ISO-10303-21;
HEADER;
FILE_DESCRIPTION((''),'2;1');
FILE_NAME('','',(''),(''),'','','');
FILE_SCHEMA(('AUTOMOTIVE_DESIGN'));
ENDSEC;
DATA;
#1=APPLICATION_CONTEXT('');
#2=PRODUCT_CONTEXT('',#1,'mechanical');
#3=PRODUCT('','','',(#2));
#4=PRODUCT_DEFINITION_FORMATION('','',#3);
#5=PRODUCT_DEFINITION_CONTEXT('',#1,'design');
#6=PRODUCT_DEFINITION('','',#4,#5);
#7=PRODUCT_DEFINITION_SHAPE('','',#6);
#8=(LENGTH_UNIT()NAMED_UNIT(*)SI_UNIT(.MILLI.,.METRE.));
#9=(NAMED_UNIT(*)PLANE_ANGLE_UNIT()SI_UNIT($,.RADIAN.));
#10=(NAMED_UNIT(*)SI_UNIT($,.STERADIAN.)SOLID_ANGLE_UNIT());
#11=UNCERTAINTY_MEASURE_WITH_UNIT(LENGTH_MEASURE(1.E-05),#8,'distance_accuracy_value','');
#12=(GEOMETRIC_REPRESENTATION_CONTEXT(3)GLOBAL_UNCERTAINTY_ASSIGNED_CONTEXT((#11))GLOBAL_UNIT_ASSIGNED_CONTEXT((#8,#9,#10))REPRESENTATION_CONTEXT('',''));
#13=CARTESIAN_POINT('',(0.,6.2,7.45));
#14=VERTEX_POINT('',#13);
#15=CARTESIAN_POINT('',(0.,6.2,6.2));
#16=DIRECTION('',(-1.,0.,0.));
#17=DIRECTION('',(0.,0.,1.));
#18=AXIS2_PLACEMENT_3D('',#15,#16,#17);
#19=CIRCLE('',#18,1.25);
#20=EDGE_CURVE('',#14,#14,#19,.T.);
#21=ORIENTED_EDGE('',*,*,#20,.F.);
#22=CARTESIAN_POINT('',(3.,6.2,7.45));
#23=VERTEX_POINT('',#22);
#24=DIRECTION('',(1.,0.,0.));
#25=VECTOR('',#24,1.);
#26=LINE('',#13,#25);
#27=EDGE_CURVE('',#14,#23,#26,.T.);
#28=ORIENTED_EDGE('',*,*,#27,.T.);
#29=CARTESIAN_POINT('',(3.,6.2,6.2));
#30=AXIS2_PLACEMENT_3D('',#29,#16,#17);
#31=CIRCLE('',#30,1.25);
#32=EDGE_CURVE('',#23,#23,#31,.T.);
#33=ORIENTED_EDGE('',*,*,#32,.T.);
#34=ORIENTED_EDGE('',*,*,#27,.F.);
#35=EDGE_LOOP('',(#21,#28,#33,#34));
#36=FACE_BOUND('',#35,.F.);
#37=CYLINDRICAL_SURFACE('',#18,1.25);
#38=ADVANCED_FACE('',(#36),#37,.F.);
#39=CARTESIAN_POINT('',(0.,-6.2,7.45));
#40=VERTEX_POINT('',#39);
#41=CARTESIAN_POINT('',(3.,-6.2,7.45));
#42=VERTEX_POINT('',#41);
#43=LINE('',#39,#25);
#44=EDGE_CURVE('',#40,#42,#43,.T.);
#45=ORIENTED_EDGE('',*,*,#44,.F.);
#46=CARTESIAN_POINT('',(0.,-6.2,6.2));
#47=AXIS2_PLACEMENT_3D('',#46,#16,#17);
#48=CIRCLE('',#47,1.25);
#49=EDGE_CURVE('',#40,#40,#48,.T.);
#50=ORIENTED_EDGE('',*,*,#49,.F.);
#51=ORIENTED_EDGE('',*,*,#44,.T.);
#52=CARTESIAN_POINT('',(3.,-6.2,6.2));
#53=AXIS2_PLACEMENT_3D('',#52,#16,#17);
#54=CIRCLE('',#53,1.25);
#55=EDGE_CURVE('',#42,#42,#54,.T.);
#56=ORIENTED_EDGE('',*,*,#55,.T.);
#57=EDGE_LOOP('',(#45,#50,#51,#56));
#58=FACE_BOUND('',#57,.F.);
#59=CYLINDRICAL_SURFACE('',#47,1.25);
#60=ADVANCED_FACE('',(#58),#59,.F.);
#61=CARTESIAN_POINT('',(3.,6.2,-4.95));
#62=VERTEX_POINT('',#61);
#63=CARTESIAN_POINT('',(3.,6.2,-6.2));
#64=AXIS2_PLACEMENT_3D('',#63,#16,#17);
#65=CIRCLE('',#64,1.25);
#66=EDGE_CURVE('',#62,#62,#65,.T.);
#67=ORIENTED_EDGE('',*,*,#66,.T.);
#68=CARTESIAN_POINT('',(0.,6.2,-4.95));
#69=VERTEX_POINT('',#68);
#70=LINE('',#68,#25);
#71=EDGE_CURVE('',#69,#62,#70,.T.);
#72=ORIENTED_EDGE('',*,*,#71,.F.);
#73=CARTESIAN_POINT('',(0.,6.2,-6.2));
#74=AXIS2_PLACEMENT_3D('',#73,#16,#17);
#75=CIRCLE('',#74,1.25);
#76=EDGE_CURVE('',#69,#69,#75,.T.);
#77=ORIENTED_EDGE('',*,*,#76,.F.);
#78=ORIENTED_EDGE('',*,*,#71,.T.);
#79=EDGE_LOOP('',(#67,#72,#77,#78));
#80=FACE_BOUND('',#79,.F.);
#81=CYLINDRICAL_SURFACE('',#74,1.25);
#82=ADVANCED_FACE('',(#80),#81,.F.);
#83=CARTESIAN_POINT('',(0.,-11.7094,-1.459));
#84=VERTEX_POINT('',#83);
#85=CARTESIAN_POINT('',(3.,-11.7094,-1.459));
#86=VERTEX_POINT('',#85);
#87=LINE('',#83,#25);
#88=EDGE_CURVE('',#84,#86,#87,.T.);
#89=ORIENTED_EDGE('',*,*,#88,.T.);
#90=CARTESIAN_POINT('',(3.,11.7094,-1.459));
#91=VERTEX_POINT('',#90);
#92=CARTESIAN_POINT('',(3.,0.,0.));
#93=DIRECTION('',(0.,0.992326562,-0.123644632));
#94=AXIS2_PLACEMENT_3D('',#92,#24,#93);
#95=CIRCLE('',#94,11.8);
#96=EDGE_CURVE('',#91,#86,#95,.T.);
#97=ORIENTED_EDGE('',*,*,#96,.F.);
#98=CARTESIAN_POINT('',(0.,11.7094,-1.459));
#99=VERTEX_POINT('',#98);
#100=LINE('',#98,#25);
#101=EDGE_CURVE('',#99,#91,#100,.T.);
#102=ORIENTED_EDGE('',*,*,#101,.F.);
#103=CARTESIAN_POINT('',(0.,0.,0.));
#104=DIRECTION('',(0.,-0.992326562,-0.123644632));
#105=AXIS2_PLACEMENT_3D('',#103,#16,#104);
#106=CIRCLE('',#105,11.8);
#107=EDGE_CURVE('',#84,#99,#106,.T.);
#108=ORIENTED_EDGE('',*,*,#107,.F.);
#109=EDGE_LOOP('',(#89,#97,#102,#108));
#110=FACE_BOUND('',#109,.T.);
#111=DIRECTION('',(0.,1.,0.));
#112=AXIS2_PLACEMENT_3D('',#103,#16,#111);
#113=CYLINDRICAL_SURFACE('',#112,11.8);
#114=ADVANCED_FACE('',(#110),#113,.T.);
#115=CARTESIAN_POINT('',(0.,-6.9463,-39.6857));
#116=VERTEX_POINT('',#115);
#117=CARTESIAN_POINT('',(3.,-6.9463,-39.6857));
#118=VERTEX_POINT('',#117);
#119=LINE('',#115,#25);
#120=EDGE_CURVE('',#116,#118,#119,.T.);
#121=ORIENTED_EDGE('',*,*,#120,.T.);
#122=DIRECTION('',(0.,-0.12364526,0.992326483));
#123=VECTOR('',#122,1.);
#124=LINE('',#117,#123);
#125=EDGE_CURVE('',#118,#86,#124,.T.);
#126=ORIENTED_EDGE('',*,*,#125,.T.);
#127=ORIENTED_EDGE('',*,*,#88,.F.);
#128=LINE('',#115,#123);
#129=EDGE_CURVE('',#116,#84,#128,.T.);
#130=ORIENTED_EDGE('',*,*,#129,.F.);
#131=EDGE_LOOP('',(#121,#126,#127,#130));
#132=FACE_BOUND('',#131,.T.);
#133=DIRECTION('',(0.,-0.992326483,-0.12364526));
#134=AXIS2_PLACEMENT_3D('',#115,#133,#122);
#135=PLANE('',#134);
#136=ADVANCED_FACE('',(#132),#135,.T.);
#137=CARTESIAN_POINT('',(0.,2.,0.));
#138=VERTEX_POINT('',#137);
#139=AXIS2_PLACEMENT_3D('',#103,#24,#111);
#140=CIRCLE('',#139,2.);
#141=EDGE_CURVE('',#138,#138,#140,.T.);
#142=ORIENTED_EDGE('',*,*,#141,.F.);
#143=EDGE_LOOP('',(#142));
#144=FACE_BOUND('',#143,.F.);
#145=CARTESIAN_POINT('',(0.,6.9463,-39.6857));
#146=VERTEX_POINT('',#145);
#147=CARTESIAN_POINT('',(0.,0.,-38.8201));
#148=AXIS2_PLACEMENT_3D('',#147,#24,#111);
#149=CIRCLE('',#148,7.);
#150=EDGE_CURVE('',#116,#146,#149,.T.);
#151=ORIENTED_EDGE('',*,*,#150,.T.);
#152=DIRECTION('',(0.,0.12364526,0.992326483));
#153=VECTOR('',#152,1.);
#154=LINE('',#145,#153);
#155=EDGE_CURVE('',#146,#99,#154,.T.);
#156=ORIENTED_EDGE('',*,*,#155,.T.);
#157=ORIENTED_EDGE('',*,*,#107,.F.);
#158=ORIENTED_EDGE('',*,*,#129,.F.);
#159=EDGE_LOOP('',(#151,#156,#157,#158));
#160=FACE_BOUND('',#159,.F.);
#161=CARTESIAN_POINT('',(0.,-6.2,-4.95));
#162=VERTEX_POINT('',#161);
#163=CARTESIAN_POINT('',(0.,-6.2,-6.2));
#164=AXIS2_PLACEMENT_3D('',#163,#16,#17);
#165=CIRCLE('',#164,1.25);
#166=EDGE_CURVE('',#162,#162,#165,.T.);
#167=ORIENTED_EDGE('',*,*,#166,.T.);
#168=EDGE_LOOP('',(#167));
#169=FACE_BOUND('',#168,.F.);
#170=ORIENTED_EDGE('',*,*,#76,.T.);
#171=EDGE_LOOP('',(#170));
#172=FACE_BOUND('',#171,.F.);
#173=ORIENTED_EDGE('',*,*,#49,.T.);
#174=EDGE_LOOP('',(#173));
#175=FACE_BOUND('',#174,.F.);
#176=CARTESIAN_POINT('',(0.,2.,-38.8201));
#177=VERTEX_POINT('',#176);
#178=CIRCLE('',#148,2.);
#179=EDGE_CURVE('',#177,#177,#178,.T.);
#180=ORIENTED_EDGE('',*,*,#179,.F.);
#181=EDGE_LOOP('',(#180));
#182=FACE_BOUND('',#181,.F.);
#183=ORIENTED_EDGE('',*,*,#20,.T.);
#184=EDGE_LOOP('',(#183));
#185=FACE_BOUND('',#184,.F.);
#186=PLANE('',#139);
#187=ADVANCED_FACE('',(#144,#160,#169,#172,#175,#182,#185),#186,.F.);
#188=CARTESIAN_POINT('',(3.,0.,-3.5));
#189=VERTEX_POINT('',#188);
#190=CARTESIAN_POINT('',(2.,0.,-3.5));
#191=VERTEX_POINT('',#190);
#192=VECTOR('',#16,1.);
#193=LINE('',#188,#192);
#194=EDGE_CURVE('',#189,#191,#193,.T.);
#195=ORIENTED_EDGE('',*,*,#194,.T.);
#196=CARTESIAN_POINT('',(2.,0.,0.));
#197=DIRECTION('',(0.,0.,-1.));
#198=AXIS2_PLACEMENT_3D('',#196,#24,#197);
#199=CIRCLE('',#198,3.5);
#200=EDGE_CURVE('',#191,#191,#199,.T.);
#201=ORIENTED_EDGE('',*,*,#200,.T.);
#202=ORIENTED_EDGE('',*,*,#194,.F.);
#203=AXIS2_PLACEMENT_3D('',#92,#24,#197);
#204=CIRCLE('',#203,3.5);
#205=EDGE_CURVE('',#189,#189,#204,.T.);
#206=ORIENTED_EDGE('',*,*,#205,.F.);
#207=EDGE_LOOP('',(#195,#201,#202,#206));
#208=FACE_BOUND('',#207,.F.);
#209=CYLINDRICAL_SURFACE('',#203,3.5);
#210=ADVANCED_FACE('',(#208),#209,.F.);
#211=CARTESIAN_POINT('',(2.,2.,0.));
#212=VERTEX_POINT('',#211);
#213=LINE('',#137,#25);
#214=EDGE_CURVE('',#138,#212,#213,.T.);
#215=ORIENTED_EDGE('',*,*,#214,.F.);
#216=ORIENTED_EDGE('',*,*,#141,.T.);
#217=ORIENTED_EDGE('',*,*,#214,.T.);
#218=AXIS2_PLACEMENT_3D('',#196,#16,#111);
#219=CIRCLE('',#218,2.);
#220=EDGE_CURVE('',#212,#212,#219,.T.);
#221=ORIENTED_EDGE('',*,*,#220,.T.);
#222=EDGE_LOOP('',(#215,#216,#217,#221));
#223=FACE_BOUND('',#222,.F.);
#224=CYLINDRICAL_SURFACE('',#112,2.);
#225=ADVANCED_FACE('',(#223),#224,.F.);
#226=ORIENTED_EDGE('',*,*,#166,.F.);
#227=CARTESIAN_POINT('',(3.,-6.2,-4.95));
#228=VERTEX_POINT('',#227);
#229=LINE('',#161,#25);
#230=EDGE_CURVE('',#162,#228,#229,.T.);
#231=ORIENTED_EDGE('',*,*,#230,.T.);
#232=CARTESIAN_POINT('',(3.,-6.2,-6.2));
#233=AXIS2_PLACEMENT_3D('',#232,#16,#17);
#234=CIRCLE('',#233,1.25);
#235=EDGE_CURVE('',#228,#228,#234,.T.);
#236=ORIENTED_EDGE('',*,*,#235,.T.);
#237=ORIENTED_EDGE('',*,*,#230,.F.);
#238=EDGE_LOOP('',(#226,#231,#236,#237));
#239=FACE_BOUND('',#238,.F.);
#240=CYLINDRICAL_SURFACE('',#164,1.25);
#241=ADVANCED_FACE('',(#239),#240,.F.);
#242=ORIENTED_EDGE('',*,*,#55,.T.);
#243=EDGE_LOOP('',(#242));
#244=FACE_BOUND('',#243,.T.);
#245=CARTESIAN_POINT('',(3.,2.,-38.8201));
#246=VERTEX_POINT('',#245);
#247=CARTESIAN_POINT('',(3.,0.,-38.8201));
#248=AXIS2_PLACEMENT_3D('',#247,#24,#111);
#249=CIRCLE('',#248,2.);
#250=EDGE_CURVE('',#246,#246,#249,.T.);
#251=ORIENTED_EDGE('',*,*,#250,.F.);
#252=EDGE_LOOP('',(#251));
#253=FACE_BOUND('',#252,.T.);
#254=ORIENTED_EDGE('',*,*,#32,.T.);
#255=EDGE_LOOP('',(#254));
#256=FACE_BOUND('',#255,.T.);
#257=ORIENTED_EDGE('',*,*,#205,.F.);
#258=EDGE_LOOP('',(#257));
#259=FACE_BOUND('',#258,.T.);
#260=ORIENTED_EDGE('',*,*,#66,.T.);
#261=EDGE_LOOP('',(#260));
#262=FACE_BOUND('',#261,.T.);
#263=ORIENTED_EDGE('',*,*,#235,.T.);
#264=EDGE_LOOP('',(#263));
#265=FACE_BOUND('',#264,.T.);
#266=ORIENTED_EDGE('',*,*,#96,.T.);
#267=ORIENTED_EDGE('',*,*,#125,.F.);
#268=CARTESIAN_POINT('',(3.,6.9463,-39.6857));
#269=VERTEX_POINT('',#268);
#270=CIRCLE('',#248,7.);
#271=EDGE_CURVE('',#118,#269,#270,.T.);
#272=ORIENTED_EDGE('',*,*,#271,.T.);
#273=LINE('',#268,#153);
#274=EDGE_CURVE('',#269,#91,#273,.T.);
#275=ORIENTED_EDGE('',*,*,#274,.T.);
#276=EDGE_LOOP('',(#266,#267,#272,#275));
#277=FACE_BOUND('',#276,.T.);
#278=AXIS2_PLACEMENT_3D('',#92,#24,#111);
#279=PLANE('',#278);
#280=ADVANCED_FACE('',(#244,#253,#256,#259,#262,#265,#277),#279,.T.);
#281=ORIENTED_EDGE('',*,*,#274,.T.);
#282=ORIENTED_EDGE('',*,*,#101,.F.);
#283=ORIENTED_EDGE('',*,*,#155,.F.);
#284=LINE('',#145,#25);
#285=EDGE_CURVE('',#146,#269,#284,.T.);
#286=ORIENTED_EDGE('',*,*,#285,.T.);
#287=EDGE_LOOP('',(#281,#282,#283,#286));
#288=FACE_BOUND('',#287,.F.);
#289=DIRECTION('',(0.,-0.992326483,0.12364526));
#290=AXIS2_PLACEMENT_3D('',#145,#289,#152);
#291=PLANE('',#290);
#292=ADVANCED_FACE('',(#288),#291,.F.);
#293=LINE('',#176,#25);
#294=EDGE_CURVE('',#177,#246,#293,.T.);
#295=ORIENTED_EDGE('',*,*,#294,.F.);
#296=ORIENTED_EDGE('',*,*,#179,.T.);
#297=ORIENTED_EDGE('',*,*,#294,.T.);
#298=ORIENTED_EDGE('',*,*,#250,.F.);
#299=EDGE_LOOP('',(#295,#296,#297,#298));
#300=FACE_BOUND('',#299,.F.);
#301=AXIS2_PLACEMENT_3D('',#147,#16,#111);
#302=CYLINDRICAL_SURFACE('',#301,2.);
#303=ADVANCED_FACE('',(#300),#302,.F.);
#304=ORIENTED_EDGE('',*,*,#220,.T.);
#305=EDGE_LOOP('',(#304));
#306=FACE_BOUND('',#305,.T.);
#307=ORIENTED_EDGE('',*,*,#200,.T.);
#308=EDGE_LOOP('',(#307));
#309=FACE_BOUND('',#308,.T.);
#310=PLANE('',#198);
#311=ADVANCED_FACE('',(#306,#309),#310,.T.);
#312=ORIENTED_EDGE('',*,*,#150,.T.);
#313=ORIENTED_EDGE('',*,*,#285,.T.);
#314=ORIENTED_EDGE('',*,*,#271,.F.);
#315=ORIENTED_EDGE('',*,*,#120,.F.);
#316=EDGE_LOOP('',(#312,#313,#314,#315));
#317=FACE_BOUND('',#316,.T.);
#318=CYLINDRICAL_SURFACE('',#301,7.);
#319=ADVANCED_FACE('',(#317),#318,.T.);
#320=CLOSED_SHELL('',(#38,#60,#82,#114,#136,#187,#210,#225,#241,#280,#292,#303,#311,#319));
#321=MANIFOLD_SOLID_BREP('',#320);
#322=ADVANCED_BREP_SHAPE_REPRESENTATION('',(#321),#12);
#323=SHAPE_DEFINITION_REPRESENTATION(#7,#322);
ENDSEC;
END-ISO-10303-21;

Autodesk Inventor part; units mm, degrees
ref_plane "YZ Plane" through (0, 0, 0) normal (1, 0, 0) x (0, 1, 0)
ref_plane "XZ Plane" through (0, 0, 0) normal (0, 1, 0) x (-1, 0, 0)
ref_plane "XY Plane" through (0, 0, 0) normal (0, 0, 1) x (1, 0, 0)
sketch "Эскиз1" plane through (0, 0, 0) normal (1, 0, 0) x (0, 1, 0)
  circle A0 centre (35.2311, -22.6062) radius 9.3
  circle A1 centre (0, -38.8201) radius 6.1
  circle A2 centre (0, 0) radius 4.85
  circle A3 centre (35.8147, -49.5529) radius 3.55
  line L0 (6.0968, -38.6237) -> (4.8475, 0.1562)
  line L1 (-4.8475, 0.1562) -> (-6.0968, -38.6237)
  line L2 (0, 0) -> (0, -38.8201) construction
  circle A4 centre (0, -38.8201) radius 2
  circle A5 centre (0, 0) radius 2
  circle A6 centre (0, -38.8201) radius 15 construction
  circle A7 centre (0, 0) radius 14 construction
  circle A8 centre (0, -38.8201) radius 7
  circle A9 centre (0, 0) radius 7
  line L3 (6.9463, -39.6857) -> (11.7094, -1.459)
  line L4 (-6.9463, -39.6857) -> (-11.7094, -1.459)
  circle A10 centre (0, 0) radius 8.8
  circle A11 centre (0, 0) radius 11.8
  point P0 (-7, 0)
  point P1 (-6.9463, -39.6857)
  point P2 (-11.7094, -1.459)
  dimension "d27" = 14
  dimension "d0" = 18.6
  dimension "d1" = 12.2
  dimension "d2" = 9.7
  dimension "d3" = 7.1
  dimension "d8" = 38.8201
  dimension "d13" = 38.8
  dimension "d14" = 38.8
  dimension "d23" = 4
  dimension "d24" = 4
  dimension "d25" = 30
  dimension "d26" = 28
  dimension "d28" = 14
  dimension "d31" = 17.6
  dimension "d32" = 3
extrude "Выдавливание4" add sketch "Эскиз1" along normal blind 3 contours A1 | A1 L0 A8 L1 | A1 L1 A8 L0 | A8 L1 A11 L0 | L0 A11 L3 A8 | A8 L4 A11 L1 | A11 L1 A10 L0 | L0 A10 L1 A11 | A10 L1 A9 L0 | L0 A9 L1 A10 | A9 L1 A2 L0 | L0 A2 L1 A9 | A2
sketch "Эскиз4" plane through (0, 0, 0) normal (-1, 0, 0) x (0, 0, 1)
  circle A0 centre (-6.2, 6.2) radius 1.25
  circle A1 centre (0, 0) radius 2 construction
  circle A2 centre (-38.8201, 0) radius 2 construction
  arc A3 (-1.459, -11.7094) -> (-1.459, 11.7094) centre (0, 0) ccw construction
  line L0 (-39.6857, 6.9463) -> (-1.459, 11.7094) construction
  arc A4 (-39.6857, 6.9463) -> (-39.6857, -6.9463) centre (-38.8201, 0) ccw construction
  line L1 (-1.459, -11.7094) -> (-39.6857, -6.9463) construction
  line L2 (0, 0) -> (0, 11.8) construction
  arc A5 (-1.459, -11.7094) -> (-1.459, 11.7094) centre (0, 0) ccw construction
  line L3 (0, 0) -> (11.8, 0) construction
  circle A6 centre (6.2, 6.2) radius 1.25
  circle A7 centre (-6.2, -6.2) radius 1.25
  circle A8 centre (6.2, -6.2) radius 1.25
  dimension "d33" = 2.5
  dimension "d34" = 12.4
  dimension "d35" = 12.4
extrude "Выдавливание5" cut sketch "Эскиз4" against normal blind 3
sketch "Эскиз5" plane through (3, 0, 0) normal (1, 0, 0) x (0, 0, -1)
  circle A0 centre (0, 0) radius 3.5
  dimension "d38" = 7
extrude "Выдавливание6" cut sketch "Эскиз5" against normal blind 1
properties part number "dribbler_sketch001"
